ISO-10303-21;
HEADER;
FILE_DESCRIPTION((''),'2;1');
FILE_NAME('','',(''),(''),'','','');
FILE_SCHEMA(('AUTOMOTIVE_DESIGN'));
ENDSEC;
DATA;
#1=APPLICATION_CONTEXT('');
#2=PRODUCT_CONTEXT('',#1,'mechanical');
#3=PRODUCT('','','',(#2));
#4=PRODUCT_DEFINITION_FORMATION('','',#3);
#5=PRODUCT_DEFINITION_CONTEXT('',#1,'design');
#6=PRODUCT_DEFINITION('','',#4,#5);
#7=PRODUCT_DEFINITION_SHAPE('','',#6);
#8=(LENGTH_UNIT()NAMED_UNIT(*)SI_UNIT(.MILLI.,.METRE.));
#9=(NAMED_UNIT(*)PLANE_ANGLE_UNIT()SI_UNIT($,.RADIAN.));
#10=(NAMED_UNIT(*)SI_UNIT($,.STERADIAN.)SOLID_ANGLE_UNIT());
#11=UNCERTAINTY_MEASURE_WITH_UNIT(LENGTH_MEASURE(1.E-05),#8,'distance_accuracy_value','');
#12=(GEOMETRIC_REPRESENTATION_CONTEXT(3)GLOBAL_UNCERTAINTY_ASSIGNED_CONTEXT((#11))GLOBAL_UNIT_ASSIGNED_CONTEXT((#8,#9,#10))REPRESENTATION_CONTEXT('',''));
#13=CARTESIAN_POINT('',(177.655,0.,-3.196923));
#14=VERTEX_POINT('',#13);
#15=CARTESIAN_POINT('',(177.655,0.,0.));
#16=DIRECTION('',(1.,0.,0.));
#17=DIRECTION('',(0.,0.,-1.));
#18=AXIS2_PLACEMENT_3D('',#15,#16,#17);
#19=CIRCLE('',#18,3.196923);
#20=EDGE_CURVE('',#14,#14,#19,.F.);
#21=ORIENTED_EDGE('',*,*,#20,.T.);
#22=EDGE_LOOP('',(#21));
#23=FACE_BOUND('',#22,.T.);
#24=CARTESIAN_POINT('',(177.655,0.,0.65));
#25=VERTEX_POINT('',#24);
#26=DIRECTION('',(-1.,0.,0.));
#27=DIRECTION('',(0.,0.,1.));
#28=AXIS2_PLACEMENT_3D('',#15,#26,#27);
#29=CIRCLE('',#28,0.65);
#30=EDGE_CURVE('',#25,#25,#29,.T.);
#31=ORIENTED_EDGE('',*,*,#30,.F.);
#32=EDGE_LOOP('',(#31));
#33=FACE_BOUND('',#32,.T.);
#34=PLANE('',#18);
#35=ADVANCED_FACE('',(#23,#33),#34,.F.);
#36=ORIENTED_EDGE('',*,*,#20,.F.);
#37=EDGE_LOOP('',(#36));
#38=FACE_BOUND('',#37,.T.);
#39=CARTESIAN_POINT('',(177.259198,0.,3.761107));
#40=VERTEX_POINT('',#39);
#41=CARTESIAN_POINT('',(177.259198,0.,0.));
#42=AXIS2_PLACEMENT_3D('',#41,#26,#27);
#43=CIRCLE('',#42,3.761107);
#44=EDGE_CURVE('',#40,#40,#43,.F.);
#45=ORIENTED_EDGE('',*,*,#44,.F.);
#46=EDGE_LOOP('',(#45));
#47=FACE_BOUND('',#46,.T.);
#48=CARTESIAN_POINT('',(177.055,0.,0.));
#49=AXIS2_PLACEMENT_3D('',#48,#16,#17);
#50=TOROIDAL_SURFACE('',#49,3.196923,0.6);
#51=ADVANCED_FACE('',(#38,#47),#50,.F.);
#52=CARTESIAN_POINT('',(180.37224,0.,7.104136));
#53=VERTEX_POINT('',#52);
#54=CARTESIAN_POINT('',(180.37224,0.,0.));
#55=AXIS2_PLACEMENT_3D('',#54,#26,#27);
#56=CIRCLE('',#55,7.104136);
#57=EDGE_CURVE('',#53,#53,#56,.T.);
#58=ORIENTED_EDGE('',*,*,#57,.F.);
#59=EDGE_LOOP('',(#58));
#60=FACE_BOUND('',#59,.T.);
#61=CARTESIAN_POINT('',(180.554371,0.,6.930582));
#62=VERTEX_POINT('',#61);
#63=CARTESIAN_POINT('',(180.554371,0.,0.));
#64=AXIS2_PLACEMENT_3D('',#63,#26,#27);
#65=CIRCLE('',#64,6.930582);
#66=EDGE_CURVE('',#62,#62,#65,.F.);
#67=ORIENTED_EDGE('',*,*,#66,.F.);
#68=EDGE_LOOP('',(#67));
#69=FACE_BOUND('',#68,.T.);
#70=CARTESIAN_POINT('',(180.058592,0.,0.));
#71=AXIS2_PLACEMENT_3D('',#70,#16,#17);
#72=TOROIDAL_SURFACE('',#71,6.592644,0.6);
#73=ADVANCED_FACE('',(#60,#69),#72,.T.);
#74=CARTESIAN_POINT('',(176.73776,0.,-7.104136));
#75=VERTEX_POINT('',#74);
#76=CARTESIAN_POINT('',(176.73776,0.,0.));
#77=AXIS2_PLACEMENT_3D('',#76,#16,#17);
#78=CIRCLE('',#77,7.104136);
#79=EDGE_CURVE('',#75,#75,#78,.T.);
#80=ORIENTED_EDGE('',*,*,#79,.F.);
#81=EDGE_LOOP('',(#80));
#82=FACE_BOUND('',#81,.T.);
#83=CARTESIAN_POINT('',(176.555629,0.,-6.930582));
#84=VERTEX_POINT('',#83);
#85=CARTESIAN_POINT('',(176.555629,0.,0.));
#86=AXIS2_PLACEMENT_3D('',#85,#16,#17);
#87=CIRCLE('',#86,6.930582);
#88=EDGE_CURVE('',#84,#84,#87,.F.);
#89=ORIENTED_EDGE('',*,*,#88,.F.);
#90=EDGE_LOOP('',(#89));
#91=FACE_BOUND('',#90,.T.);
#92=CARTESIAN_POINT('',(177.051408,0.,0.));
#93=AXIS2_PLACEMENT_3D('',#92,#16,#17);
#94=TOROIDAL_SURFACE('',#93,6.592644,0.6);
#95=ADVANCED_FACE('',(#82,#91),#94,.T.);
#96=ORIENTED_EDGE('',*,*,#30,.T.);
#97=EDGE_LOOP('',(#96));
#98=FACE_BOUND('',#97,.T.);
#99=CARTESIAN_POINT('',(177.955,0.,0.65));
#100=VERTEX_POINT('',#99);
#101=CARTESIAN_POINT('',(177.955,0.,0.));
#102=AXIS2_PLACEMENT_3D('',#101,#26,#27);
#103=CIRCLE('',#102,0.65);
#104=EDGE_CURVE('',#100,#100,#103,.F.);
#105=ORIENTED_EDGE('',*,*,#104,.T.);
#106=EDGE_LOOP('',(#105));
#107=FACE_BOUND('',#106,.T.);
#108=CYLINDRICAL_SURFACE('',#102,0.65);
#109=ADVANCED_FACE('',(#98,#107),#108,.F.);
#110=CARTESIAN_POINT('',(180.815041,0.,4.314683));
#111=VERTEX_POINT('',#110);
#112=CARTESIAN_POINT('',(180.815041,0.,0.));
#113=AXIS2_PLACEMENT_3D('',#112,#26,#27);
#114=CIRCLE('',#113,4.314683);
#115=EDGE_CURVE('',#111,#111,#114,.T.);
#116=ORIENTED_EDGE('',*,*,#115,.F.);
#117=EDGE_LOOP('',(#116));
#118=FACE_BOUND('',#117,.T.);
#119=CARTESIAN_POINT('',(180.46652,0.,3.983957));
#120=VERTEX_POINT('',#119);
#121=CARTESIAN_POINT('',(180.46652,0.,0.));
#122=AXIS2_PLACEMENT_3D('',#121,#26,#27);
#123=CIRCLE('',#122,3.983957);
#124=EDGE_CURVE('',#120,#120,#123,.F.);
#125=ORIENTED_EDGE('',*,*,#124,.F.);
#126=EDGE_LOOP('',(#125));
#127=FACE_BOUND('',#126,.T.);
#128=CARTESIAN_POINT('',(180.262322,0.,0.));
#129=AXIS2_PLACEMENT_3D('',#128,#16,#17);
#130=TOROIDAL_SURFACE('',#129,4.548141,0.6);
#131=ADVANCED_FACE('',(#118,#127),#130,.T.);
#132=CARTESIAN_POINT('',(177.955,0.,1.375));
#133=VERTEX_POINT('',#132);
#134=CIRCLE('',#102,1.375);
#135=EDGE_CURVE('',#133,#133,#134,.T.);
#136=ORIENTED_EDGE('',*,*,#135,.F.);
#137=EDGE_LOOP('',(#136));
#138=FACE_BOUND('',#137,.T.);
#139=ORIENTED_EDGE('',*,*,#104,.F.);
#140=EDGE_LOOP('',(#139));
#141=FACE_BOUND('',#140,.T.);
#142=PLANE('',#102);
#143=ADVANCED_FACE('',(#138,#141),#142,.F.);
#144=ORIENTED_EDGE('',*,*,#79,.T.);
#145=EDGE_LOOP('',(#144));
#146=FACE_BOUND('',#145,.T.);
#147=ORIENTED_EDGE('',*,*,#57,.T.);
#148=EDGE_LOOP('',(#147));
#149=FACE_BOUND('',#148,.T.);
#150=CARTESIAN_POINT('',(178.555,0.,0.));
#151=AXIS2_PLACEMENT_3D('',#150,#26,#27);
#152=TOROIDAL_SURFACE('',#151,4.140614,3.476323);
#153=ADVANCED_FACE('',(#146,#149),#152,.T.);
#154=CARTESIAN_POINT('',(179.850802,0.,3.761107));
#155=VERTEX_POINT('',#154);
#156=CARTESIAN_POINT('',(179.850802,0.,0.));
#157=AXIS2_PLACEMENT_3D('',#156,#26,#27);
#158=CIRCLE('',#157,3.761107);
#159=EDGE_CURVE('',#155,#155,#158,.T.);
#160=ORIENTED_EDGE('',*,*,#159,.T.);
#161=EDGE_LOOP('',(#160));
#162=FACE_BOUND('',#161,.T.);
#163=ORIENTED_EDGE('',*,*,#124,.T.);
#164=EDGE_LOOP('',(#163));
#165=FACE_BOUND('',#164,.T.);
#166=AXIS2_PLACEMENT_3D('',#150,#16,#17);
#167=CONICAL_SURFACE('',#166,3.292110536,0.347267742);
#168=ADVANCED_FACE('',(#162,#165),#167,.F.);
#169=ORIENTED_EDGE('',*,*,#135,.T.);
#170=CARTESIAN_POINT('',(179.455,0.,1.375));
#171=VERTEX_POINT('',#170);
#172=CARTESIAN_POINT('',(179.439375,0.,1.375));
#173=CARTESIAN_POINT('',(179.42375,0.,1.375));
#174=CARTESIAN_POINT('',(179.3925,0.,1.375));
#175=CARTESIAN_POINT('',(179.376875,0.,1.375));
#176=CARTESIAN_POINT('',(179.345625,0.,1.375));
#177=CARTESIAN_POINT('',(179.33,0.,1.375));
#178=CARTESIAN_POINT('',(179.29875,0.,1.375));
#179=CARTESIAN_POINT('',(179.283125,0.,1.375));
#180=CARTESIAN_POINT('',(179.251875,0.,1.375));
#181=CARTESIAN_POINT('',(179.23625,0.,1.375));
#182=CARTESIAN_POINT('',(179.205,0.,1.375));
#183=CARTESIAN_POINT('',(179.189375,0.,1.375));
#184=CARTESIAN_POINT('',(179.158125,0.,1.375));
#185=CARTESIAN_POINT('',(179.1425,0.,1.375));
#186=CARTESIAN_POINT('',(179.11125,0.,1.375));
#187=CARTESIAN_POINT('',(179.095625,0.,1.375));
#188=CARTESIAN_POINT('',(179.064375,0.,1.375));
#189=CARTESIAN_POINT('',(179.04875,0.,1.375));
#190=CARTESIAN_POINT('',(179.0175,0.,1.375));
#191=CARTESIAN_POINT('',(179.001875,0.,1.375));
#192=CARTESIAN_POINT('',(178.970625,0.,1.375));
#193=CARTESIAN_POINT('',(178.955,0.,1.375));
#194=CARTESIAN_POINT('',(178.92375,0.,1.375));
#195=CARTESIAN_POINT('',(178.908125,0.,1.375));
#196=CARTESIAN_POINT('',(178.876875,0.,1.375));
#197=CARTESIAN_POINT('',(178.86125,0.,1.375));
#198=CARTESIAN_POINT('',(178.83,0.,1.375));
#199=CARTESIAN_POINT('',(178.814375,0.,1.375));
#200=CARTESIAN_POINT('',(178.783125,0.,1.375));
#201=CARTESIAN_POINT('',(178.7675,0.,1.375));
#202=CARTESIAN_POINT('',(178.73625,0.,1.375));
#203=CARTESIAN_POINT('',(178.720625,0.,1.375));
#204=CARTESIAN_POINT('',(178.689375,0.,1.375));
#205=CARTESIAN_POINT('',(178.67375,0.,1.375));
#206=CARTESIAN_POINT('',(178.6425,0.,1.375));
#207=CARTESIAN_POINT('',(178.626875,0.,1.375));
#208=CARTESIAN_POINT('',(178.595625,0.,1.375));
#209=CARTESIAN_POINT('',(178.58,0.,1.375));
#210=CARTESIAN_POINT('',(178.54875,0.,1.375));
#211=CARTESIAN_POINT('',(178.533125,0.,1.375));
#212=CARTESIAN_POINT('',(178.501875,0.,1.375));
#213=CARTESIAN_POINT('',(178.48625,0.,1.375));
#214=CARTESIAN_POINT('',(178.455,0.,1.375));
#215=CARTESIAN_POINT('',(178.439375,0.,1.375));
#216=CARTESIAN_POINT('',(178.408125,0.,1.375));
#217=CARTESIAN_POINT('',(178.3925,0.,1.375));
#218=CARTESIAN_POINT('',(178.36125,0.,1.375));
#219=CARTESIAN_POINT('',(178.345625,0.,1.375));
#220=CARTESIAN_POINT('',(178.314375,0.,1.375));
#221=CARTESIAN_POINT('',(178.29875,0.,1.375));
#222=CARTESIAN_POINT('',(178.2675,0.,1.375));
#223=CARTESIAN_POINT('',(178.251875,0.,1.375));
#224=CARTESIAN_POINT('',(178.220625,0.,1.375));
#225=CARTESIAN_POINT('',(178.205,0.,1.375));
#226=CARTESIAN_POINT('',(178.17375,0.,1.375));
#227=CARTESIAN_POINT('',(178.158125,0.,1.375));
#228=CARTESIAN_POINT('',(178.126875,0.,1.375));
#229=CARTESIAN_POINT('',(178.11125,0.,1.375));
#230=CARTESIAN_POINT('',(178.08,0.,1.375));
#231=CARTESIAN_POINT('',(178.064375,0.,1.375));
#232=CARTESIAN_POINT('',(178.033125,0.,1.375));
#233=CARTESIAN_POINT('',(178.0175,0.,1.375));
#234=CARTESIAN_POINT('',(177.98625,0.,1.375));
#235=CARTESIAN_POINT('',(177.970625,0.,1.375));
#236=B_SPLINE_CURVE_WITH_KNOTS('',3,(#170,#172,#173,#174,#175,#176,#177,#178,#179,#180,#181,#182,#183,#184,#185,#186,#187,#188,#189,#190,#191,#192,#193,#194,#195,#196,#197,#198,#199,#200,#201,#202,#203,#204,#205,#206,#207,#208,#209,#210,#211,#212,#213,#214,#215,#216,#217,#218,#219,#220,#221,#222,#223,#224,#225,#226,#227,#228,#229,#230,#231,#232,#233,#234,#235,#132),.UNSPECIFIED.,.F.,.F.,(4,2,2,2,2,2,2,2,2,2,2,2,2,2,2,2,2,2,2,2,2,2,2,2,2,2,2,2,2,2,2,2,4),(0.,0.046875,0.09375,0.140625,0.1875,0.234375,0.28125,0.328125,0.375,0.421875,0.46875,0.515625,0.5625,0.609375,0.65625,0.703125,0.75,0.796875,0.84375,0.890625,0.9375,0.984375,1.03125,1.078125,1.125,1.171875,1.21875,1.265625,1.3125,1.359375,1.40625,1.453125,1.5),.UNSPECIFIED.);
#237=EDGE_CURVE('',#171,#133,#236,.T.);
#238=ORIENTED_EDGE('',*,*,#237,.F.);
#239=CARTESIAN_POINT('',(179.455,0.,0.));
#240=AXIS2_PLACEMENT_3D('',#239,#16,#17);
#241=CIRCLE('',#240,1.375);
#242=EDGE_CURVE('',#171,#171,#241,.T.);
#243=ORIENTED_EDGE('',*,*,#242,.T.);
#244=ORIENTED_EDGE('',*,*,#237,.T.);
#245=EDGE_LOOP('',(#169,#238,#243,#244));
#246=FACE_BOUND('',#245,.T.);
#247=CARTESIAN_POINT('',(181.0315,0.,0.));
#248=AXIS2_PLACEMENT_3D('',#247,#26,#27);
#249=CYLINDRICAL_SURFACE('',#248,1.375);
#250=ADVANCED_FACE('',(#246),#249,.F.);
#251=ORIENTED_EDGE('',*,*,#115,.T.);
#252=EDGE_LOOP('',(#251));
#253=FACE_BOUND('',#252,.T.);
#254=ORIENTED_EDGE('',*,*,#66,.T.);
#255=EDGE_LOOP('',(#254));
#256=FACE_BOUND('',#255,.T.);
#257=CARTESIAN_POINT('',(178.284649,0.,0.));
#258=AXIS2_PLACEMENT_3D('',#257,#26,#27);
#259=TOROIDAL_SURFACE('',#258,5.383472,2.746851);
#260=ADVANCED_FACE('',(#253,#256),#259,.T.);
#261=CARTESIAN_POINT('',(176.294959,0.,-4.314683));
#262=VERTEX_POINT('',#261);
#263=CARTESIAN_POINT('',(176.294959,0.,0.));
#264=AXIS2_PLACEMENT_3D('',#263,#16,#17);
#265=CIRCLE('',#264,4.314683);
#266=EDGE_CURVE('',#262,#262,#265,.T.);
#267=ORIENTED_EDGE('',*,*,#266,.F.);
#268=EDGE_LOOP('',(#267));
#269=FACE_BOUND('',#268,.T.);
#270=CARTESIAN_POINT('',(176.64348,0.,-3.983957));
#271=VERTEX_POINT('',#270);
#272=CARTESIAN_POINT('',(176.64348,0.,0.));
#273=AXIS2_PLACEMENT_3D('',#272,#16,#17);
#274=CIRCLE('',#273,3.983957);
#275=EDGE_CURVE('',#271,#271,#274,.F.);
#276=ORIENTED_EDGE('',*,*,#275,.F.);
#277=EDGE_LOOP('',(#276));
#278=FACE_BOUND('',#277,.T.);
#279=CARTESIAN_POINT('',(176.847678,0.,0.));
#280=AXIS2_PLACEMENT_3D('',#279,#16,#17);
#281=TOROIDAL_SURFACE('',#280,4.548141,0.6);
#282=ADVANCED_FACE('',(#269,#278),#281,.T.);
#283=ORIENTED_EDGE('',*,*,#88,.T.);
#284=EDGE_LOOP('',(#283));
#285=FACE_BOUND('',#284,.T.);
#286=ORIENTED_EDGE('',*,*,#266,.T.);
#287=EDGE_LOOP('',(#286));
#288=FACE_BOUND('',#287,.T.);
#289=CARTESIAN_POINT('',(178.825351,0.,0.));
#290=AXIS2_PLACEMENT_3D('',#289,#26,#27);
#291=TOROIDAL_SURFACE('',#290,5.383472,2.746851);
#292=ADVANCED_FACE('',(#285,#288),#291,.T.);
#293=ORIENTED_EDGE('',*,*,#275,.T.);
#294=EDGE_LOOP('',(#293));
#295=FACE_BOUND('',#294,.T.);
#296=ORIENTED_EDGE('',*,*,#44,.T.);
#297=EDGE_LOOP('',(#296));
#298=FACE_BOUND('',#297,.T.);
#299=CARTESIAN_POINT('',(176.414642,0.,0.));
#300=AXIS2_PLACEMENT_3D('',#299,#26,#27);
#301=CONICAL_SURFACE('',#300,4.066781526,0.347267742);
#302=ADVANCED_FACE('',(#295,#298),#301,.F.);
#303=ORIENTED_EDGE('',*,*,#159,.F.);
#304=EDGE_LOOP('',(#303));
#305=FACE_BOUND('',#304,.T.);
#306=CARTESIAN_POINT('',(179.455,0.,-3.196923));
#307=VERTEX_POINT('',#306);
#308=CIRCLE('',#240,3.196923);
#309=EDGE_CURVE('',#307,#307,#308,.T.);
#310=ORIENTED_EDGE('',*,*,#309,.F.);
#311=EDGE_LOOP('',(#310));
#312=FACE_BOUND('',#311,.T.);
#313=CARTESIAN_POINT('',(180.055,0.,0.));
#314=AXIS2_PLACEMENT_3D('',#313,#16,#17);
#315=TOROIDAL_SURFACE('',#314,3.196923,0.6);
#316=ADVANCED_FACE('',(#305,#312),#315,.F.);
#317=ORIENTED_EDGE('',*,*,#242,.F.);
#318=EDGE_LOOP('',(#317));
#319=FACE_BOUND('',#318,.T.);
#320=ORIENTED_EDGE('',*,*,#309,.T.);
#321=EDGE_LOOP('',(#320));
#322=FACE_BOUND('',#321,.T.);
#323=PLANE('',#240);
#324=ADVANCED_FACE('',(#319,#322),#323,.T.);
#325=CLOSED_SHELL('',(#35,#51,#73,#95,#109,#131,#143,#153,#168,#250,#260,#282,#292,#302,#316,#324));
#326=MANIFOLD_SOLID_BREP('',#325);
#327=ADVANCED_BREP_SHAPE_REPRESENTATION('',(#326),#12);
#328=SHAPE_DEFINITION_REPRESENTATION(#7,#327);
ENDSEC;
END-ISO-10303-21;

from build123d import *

# Parameters (mm, degrees)
BOSS_EXTRUDE1_DEPTH      = 15
BOSS_EXTRUDE1_DEPTH_BACK = 15
SKETCH9_R                = 82.980405075
FILLET1_R                = 10
FILLET2_R                = 10
SKETCH10_R               = 7.5
CUT_EXTRUDE1_DEPTH       = 217
SCALE1_SCALE             = 0.06
SKETCH11_R               = 0.65
CUT_EXTRUDE2_DEPTH       = 0.3
SKETCH12_R               = 1.375
CUT_EXTRUDE3_DEPTH       = 12.202693298


# Read off the part's stored shape, not the designer's step: 4WD+Public+Release+v2.stp-1-1/10 in Wheel v6_2.stp-1-1/Hub Outer_2.stp-1-1-solid1, 4WD+Public+Release+v2.stp-1-1/10 in Wheel v6_2.stp-1-1/Tire_2.stp-1-1-solid1
with BuildPart() as part:
    # Sketch4 → Revolve1 (revolve)
    with BuildSketch(Plane(origin=(0, 0, 0), x_dir=(1, 0, 0), z_dir=(0, 1, 0)), mode=Mode.PRIVATE) as revolve1_sk:
        with BuildLine():
            Line((178.555, 54.868508928), (142.882367679, 67.779692093))
            ThreePointArc((142.882367679, 67.779692093), (137.401406362, 93.056409756), (146.493772776, 117.269676074))
            ThreePointArc((146.493772776, 117.269676074), (167.073162285, 125.799877163), (189.35, 125.93443048))
            ThreePointArc((189.35, 125.93443048), (197.261254179, 123.846099939), (204.799435578, 120.664136972))
            ThreePointArc((204.799435578, 120.664136972), (207.757194609, 119.051495943), (210.616227227, 117.26967607))
            ThreePointArc((210.616227227, 117.26967607), (216.011090665, 108.029767793), (219.113930019, 97.79))
            ThreePointArc((219.113930019, 97.79), (219.685241725, 93.362296783), (219.822574385, 88.9))
            ThreePointArc((219.822574385, 88.9), (218.303521616, 78.001182607), (214.227632321, 67.779692093))
            Line((214.227632321, 67.779692093), (178.555, 54.868508928))
        make_face()
    revolve(revolve1_sk.sketch.rotate(Axis((0, 0, 0), (1, 0, 0)), 180), axis=Axis((0, 0, 0), (1, 0, 0)))

    # Sketch9 → Boss-Extrude1 (add, two sides: drawn at the far end of the back side and taken through both)
    with BuildSketch(Plane(origin=(178.555, 0, 0), x_dir=(0, 0, -1), z_dir=(1, 0, 0)).offset(-BOSS_EXTRUDE1_DEPTH_BACK)):
        Circle(SKETCH9_R)
    extrude(amount=BOSS_EXTRUDE1_DEPTH + BOSS_EXTRUDE1_DEPTH_BACK)

    # Fillet1
    fillet1_edges = [part.edges().sort_by_distance(p)[0] for p in [
        (163.555, 0, -60.297537706),
        (193.555, 0, -60.297537706),
    ]]
    fillet(fillet1_edges, radius=FILLET1_R)

    # Fillet2
    fillet2_edges = [part.edges().sort_by_distance(p)[0] for p in [
        (210.616227227, 0, -117.26967607),
        (214.227632321, 0, -67.779692093),
        (142.882367679, 0, -67.779692093),
        (146.493772776, 0, -117.269676074),
    ]]
    fillet(fillet2_edges, radius=FILLET2_R)

    # Sketch10 → Cut-Extrude1 (cut)
    with BuildSketch(Plane(origin=(193.555, 0, 0), x_dir=(0, 0, -1), z_dir=(1, 0, 0))):
        Circle(SKETCH10_R)
    extrude(amount=-CUT_EXTRUDE1_DEPTH, mode=Mode.SUBTRACT)


with BuildPart() as part_1:
    # Scale1: scaled about (178.555, 0, -7.2e-08)
    add(part.part.scale(SCALE1_SCALE).moved(Location((167.8417, 0, -6.8e-08))))

    # Sketch11 → Cut-Extrude2 (cut)
    with BuildSketch(Plane.ZY.offset(-177.655)):
        Circle(SKETCH11_R)
    extrude(amount=-CUT_EXTRUDE2_DEPTH, mode=Mode.SUBTRACT)

    # Sketch12 → Cut-Extrude3 (cut, through all)
    with BuildSketch(Plane.ZY.offset(-177.955)):
        Circle(SKETCH12_R)
    extrude(amount=-CUT_EXTRUDE3_DEPTH, mode=Mode.SUBTRACT)


solid = part_1.part
